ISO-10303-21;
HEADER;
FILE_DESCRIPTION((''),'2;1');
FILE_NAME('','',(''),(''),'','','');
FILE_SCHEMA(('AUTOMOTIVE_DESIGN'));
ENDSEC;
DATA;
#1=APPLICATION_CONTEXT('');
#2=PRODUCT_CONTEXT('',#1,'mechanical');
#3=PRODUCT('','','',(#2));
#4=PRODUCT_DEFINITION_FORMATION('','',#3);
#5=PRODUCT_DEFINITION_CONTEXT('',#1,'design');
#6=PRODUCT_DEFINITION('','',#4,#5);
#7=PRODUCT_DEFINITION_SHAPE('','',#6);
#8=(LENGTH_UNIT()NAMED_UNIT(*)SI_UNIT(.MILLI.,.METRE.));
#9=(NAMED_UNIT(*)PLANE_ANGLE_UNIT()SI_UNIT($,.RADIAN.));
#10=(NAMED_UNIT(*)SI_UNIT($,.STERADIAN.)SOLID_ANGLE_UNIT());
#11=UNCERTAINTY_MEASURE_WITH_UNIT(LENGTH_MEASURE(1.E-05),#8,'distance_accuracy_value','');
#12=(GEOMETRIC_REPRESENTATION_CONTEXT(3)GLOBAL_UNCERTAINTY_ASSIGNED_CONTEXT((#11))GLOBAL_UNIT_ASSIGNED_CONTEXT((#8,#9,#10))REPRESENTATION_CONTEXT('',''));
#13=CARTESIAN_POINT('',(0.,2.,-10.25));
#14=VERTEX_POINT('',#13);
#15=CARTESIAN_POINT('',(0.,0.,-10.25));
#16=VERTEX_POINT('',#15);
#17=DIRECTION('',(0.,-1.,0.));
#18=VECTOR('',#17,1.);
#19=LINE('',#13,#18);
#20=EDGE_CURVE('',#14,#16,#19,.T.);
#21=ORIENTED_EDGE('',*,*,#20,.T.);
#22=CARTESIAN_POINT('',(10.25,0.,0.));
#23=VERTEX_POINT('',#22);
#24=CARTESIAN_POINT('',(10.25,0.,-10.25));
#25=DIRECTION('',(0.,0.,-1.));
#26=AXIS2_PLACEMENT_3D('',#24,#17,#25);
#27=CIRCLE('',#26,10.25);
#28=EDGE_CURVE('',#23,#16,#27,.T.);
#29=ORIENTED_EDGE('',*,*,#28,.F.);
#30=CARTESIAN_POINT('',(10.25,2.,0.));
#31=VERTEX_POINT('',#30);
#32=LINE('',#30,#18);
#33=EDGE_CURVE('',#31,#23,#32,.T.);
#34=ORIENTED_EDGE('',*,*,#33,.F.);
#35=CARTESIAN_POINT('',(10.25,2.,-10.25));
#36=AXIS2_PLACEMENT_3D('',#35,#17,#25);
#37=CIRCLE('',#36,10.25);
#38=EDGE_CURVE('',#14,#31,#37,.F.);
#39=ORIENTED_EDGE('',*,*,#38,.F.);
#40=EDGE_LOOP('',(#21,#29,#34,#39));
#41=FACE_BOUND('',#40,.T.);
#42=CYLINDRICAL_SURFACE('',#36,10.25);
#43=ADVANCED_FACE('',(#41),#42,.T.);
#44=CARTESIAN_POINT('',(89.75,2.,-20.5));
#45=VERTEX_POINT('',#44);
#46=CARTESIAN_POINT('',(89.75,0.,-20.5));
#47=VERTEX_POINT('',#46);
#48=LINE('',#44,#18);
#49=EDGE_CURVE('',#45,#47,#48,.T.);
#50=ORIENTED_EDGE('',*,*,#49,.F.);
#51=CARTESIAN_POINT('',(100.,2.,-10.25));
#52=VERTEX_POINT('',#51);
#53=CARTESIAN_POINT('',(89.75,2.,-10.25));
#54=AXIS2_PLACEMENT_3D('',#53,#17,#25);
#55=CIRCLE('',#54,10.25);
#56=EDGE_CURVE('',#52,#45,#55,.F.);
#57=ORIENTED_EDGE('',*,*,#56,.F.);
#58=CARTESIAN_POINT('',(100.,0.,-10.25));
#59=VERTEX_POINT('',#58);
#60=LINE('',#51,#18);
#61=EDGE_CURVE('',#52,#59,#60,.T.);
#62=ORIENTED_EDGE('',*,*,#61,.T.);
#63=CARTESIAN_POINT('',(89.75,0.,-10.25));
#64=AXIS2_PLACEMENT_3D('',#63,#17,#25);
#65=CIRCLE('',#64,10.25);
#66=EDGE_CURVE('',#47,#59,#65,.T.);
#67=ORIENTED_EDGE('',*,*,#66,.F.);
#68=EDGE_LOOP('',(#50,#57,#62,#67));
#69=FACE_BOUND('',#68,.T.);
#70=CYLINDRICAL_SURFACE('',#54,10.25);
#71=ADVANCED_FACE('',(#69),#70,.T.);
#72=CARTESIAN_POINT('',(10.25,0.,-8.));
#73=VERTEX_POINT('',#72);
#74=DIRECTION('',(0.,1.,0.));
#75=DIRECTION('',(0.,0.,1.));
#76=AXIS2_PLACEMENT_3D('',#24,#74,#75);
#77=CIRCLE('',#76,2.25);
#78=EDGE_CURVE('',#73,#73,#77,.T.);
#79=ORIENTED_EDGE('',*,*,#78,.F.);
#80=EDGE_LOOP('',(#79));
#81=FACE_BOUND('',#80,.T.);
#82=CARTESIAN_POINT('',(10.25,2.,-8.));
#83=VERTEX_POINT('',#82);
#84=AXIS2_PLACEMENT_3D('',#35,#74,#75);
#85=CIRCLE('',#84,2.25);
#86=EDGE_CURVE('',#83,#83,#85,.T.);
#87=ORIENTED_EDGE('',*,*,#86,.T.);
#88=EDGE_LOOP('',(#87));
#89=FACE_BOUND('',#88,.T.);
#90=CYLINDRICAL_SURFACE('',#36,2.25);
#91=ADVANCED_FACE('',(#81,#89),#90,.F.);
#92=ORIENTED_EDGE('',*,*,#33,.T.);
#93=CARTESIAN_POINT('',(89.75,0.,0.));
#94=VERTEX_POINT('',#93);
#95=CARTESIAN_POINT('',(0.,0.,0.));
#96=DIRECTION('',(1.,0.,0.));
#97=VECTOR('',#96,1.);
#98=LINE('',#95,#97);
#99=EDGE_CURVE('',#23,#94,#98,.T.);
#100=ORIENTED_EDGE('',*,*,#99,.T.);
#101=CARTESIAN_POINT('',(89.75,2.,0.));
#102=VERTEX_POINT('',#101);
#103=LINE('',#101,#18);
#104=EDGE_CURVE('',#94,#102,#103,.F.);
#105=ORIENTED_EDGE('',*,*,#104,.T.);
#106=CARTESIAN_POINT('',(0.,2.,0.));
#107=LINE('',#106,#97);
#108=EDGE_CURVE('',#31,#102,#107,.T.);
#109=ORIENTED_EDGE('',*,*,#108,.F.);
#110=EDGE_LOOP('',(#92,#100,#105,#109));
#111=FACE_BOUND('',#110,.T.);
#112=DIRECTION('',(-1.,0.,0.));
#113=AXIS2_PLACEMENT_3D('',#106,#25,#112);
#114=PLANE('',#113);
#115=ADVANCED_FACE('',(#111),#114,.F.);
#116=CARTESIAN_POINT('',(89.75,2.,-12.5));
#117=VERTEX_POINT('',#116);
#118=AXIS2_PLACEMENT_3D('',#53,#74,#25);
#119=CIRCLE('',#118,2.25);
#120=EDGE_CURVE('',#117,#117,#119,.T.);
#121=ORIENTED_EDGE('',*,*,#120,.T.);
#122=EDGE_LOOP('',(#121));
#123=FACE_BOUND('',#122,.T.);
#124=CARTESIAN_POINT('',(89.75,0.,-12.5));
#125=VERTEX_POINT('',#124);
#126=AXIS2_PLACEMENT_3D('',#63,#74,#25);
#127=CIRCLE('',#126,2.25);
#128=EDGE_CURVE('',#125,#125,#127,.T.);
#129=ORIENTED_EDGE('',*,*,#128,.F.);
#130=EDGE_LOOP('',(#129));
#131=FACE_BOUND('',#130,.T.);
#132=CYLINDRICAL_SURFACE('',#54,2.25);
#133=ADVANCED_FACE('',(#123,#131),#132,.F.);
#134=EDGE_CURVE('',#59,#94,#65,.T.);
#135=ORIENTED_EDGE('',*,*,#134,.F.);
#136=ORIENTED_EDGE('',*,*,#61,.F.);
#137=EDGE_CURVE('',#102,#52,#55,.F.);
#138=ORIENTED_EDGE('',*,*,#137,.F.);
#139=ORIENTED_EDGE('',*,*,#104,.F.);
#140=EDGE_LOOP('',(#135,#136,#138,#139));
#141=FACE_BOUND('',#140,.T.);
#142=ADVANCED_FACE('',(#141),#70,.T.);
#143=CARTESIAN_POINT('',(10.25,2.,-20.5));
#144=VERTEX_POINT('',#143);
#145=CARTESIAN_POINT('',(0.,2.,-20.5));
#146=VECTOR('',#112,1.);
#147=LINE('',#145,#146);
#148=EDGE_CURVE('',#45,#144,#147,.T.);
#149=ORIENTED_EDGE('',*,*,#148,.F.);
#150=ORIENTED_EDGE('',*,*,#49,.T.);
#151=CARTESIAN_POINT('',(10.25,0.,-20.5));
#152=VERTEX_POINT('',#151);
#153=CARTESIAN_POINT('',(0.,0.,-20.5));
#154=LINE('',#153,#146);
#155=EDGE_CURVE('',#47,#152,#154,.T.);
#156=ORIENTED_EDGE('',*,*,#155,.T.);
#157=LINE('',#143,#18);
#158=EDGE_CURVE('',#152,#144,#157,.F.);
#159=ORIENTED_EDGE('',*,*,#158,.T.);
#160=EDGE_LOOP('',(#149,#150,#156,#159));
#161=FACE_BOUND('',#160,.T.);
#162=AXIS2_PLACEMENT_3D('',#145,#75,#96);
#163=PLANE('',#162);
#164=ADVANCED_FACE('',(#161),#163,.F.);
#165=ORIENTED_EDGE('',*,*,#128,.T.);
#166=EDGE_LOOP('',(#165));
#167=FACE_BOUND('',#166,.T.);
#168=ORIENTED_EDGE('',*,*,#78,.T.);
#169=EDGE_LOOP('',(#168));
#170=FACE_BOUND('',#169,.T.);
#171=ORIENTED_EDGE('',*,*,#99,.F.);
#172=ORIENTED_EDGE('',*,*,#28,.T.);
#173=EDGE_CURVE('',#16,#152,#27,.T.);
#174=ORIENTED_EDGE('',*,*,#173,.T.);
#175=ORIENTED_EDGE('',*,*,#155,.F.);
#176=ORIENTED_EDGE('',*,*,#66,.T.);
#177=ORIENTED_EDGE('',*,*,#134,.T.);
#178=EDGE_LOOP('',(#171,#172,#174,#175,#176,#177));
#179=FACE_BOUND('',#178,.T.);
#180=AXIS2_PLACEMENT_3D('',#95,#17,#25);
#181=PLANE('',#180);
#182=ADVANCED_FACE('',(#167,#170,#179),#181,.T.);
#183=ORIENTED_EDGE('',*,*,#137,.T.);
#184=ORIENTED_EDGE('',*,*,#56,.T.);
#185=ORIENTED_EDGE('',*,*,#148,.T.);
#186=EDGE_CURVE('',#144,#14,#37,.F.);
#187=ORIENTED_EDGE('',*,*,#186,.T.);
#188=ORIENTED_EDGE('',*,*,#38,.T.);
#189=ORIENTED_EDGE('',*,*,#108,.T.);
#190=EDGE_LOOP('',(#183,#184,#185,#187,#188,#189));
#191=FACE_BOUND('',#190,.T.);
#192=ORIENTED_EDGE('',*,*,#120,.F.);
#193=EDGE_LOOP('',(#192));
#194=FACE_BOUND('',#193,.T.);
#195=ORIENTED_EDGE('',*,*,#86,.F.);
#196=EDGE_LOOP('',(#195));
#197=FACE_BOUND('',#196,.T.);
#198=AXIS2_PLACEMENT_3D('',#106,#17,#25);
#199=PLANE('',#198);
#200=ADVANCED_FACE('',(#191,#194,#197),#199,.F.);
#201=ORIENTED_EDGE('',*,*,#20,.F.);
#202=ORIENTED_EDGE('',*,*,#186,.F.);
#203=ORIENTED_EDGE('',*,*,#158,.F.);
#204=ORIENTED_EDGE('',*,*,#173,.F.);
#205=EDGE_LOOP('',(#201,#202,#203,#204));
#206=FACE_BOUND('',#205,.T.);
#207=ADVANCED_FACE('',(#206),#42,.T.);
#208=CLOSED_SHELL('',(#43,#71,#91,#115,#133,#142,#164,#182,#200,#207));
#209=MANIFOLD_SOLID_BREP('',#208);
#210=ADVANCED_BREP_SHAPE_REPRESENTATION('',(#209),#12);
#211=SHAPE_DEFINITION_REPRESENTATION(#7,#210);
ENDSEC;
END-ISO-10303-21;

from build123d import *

# Parameters (mm, degrees)
SKETCH1_W           = 100
SKETCH1_H           = 20.5
SKETCH1_R           = 2.25
BOSS_EXTRUDE1_DEPTH = 2
FILLET1_R           = 10.25


with BuildPart() as part:
    # Sketch1 → Boss-Extrude1 (new body)
    with BuildSketch(Plane(origin=(0, 0, 0), x_dir=(1, 0, 0), z_dir=(0, 1, 0))):
        with Locations((50, 10.25)):
            Rectangle(SKETCH1_W, SKETCH1_H)
        with Locations(Location((10.25, 10.25, 0), (0, 0, 270))):
            Circle(SKETCH1_R, mode=Mode.SUBTRACT)
        with Locations(Location((89.75, 10.25, 0), (0, 0, 90))):
            Circle(SKETCH1_R, mode=Mode.SUBTRACT)
    extrude(amount=BOSS_EXTRUDE1_DEPTH)

    # Fillet1
    fillet1_edges = [part.edges().sort_by_distance(p)[0] for p in [
        (0, 1, 0),
        (0, 1, -20.5),
        (100, 1, -20.5),
        (100, 1, 0),
    ]]
    fillet(fillet1_edges, radius=FILLET1_R - 0.0001)  # a hair under: the kernel refuses the full size


solid = part.part
